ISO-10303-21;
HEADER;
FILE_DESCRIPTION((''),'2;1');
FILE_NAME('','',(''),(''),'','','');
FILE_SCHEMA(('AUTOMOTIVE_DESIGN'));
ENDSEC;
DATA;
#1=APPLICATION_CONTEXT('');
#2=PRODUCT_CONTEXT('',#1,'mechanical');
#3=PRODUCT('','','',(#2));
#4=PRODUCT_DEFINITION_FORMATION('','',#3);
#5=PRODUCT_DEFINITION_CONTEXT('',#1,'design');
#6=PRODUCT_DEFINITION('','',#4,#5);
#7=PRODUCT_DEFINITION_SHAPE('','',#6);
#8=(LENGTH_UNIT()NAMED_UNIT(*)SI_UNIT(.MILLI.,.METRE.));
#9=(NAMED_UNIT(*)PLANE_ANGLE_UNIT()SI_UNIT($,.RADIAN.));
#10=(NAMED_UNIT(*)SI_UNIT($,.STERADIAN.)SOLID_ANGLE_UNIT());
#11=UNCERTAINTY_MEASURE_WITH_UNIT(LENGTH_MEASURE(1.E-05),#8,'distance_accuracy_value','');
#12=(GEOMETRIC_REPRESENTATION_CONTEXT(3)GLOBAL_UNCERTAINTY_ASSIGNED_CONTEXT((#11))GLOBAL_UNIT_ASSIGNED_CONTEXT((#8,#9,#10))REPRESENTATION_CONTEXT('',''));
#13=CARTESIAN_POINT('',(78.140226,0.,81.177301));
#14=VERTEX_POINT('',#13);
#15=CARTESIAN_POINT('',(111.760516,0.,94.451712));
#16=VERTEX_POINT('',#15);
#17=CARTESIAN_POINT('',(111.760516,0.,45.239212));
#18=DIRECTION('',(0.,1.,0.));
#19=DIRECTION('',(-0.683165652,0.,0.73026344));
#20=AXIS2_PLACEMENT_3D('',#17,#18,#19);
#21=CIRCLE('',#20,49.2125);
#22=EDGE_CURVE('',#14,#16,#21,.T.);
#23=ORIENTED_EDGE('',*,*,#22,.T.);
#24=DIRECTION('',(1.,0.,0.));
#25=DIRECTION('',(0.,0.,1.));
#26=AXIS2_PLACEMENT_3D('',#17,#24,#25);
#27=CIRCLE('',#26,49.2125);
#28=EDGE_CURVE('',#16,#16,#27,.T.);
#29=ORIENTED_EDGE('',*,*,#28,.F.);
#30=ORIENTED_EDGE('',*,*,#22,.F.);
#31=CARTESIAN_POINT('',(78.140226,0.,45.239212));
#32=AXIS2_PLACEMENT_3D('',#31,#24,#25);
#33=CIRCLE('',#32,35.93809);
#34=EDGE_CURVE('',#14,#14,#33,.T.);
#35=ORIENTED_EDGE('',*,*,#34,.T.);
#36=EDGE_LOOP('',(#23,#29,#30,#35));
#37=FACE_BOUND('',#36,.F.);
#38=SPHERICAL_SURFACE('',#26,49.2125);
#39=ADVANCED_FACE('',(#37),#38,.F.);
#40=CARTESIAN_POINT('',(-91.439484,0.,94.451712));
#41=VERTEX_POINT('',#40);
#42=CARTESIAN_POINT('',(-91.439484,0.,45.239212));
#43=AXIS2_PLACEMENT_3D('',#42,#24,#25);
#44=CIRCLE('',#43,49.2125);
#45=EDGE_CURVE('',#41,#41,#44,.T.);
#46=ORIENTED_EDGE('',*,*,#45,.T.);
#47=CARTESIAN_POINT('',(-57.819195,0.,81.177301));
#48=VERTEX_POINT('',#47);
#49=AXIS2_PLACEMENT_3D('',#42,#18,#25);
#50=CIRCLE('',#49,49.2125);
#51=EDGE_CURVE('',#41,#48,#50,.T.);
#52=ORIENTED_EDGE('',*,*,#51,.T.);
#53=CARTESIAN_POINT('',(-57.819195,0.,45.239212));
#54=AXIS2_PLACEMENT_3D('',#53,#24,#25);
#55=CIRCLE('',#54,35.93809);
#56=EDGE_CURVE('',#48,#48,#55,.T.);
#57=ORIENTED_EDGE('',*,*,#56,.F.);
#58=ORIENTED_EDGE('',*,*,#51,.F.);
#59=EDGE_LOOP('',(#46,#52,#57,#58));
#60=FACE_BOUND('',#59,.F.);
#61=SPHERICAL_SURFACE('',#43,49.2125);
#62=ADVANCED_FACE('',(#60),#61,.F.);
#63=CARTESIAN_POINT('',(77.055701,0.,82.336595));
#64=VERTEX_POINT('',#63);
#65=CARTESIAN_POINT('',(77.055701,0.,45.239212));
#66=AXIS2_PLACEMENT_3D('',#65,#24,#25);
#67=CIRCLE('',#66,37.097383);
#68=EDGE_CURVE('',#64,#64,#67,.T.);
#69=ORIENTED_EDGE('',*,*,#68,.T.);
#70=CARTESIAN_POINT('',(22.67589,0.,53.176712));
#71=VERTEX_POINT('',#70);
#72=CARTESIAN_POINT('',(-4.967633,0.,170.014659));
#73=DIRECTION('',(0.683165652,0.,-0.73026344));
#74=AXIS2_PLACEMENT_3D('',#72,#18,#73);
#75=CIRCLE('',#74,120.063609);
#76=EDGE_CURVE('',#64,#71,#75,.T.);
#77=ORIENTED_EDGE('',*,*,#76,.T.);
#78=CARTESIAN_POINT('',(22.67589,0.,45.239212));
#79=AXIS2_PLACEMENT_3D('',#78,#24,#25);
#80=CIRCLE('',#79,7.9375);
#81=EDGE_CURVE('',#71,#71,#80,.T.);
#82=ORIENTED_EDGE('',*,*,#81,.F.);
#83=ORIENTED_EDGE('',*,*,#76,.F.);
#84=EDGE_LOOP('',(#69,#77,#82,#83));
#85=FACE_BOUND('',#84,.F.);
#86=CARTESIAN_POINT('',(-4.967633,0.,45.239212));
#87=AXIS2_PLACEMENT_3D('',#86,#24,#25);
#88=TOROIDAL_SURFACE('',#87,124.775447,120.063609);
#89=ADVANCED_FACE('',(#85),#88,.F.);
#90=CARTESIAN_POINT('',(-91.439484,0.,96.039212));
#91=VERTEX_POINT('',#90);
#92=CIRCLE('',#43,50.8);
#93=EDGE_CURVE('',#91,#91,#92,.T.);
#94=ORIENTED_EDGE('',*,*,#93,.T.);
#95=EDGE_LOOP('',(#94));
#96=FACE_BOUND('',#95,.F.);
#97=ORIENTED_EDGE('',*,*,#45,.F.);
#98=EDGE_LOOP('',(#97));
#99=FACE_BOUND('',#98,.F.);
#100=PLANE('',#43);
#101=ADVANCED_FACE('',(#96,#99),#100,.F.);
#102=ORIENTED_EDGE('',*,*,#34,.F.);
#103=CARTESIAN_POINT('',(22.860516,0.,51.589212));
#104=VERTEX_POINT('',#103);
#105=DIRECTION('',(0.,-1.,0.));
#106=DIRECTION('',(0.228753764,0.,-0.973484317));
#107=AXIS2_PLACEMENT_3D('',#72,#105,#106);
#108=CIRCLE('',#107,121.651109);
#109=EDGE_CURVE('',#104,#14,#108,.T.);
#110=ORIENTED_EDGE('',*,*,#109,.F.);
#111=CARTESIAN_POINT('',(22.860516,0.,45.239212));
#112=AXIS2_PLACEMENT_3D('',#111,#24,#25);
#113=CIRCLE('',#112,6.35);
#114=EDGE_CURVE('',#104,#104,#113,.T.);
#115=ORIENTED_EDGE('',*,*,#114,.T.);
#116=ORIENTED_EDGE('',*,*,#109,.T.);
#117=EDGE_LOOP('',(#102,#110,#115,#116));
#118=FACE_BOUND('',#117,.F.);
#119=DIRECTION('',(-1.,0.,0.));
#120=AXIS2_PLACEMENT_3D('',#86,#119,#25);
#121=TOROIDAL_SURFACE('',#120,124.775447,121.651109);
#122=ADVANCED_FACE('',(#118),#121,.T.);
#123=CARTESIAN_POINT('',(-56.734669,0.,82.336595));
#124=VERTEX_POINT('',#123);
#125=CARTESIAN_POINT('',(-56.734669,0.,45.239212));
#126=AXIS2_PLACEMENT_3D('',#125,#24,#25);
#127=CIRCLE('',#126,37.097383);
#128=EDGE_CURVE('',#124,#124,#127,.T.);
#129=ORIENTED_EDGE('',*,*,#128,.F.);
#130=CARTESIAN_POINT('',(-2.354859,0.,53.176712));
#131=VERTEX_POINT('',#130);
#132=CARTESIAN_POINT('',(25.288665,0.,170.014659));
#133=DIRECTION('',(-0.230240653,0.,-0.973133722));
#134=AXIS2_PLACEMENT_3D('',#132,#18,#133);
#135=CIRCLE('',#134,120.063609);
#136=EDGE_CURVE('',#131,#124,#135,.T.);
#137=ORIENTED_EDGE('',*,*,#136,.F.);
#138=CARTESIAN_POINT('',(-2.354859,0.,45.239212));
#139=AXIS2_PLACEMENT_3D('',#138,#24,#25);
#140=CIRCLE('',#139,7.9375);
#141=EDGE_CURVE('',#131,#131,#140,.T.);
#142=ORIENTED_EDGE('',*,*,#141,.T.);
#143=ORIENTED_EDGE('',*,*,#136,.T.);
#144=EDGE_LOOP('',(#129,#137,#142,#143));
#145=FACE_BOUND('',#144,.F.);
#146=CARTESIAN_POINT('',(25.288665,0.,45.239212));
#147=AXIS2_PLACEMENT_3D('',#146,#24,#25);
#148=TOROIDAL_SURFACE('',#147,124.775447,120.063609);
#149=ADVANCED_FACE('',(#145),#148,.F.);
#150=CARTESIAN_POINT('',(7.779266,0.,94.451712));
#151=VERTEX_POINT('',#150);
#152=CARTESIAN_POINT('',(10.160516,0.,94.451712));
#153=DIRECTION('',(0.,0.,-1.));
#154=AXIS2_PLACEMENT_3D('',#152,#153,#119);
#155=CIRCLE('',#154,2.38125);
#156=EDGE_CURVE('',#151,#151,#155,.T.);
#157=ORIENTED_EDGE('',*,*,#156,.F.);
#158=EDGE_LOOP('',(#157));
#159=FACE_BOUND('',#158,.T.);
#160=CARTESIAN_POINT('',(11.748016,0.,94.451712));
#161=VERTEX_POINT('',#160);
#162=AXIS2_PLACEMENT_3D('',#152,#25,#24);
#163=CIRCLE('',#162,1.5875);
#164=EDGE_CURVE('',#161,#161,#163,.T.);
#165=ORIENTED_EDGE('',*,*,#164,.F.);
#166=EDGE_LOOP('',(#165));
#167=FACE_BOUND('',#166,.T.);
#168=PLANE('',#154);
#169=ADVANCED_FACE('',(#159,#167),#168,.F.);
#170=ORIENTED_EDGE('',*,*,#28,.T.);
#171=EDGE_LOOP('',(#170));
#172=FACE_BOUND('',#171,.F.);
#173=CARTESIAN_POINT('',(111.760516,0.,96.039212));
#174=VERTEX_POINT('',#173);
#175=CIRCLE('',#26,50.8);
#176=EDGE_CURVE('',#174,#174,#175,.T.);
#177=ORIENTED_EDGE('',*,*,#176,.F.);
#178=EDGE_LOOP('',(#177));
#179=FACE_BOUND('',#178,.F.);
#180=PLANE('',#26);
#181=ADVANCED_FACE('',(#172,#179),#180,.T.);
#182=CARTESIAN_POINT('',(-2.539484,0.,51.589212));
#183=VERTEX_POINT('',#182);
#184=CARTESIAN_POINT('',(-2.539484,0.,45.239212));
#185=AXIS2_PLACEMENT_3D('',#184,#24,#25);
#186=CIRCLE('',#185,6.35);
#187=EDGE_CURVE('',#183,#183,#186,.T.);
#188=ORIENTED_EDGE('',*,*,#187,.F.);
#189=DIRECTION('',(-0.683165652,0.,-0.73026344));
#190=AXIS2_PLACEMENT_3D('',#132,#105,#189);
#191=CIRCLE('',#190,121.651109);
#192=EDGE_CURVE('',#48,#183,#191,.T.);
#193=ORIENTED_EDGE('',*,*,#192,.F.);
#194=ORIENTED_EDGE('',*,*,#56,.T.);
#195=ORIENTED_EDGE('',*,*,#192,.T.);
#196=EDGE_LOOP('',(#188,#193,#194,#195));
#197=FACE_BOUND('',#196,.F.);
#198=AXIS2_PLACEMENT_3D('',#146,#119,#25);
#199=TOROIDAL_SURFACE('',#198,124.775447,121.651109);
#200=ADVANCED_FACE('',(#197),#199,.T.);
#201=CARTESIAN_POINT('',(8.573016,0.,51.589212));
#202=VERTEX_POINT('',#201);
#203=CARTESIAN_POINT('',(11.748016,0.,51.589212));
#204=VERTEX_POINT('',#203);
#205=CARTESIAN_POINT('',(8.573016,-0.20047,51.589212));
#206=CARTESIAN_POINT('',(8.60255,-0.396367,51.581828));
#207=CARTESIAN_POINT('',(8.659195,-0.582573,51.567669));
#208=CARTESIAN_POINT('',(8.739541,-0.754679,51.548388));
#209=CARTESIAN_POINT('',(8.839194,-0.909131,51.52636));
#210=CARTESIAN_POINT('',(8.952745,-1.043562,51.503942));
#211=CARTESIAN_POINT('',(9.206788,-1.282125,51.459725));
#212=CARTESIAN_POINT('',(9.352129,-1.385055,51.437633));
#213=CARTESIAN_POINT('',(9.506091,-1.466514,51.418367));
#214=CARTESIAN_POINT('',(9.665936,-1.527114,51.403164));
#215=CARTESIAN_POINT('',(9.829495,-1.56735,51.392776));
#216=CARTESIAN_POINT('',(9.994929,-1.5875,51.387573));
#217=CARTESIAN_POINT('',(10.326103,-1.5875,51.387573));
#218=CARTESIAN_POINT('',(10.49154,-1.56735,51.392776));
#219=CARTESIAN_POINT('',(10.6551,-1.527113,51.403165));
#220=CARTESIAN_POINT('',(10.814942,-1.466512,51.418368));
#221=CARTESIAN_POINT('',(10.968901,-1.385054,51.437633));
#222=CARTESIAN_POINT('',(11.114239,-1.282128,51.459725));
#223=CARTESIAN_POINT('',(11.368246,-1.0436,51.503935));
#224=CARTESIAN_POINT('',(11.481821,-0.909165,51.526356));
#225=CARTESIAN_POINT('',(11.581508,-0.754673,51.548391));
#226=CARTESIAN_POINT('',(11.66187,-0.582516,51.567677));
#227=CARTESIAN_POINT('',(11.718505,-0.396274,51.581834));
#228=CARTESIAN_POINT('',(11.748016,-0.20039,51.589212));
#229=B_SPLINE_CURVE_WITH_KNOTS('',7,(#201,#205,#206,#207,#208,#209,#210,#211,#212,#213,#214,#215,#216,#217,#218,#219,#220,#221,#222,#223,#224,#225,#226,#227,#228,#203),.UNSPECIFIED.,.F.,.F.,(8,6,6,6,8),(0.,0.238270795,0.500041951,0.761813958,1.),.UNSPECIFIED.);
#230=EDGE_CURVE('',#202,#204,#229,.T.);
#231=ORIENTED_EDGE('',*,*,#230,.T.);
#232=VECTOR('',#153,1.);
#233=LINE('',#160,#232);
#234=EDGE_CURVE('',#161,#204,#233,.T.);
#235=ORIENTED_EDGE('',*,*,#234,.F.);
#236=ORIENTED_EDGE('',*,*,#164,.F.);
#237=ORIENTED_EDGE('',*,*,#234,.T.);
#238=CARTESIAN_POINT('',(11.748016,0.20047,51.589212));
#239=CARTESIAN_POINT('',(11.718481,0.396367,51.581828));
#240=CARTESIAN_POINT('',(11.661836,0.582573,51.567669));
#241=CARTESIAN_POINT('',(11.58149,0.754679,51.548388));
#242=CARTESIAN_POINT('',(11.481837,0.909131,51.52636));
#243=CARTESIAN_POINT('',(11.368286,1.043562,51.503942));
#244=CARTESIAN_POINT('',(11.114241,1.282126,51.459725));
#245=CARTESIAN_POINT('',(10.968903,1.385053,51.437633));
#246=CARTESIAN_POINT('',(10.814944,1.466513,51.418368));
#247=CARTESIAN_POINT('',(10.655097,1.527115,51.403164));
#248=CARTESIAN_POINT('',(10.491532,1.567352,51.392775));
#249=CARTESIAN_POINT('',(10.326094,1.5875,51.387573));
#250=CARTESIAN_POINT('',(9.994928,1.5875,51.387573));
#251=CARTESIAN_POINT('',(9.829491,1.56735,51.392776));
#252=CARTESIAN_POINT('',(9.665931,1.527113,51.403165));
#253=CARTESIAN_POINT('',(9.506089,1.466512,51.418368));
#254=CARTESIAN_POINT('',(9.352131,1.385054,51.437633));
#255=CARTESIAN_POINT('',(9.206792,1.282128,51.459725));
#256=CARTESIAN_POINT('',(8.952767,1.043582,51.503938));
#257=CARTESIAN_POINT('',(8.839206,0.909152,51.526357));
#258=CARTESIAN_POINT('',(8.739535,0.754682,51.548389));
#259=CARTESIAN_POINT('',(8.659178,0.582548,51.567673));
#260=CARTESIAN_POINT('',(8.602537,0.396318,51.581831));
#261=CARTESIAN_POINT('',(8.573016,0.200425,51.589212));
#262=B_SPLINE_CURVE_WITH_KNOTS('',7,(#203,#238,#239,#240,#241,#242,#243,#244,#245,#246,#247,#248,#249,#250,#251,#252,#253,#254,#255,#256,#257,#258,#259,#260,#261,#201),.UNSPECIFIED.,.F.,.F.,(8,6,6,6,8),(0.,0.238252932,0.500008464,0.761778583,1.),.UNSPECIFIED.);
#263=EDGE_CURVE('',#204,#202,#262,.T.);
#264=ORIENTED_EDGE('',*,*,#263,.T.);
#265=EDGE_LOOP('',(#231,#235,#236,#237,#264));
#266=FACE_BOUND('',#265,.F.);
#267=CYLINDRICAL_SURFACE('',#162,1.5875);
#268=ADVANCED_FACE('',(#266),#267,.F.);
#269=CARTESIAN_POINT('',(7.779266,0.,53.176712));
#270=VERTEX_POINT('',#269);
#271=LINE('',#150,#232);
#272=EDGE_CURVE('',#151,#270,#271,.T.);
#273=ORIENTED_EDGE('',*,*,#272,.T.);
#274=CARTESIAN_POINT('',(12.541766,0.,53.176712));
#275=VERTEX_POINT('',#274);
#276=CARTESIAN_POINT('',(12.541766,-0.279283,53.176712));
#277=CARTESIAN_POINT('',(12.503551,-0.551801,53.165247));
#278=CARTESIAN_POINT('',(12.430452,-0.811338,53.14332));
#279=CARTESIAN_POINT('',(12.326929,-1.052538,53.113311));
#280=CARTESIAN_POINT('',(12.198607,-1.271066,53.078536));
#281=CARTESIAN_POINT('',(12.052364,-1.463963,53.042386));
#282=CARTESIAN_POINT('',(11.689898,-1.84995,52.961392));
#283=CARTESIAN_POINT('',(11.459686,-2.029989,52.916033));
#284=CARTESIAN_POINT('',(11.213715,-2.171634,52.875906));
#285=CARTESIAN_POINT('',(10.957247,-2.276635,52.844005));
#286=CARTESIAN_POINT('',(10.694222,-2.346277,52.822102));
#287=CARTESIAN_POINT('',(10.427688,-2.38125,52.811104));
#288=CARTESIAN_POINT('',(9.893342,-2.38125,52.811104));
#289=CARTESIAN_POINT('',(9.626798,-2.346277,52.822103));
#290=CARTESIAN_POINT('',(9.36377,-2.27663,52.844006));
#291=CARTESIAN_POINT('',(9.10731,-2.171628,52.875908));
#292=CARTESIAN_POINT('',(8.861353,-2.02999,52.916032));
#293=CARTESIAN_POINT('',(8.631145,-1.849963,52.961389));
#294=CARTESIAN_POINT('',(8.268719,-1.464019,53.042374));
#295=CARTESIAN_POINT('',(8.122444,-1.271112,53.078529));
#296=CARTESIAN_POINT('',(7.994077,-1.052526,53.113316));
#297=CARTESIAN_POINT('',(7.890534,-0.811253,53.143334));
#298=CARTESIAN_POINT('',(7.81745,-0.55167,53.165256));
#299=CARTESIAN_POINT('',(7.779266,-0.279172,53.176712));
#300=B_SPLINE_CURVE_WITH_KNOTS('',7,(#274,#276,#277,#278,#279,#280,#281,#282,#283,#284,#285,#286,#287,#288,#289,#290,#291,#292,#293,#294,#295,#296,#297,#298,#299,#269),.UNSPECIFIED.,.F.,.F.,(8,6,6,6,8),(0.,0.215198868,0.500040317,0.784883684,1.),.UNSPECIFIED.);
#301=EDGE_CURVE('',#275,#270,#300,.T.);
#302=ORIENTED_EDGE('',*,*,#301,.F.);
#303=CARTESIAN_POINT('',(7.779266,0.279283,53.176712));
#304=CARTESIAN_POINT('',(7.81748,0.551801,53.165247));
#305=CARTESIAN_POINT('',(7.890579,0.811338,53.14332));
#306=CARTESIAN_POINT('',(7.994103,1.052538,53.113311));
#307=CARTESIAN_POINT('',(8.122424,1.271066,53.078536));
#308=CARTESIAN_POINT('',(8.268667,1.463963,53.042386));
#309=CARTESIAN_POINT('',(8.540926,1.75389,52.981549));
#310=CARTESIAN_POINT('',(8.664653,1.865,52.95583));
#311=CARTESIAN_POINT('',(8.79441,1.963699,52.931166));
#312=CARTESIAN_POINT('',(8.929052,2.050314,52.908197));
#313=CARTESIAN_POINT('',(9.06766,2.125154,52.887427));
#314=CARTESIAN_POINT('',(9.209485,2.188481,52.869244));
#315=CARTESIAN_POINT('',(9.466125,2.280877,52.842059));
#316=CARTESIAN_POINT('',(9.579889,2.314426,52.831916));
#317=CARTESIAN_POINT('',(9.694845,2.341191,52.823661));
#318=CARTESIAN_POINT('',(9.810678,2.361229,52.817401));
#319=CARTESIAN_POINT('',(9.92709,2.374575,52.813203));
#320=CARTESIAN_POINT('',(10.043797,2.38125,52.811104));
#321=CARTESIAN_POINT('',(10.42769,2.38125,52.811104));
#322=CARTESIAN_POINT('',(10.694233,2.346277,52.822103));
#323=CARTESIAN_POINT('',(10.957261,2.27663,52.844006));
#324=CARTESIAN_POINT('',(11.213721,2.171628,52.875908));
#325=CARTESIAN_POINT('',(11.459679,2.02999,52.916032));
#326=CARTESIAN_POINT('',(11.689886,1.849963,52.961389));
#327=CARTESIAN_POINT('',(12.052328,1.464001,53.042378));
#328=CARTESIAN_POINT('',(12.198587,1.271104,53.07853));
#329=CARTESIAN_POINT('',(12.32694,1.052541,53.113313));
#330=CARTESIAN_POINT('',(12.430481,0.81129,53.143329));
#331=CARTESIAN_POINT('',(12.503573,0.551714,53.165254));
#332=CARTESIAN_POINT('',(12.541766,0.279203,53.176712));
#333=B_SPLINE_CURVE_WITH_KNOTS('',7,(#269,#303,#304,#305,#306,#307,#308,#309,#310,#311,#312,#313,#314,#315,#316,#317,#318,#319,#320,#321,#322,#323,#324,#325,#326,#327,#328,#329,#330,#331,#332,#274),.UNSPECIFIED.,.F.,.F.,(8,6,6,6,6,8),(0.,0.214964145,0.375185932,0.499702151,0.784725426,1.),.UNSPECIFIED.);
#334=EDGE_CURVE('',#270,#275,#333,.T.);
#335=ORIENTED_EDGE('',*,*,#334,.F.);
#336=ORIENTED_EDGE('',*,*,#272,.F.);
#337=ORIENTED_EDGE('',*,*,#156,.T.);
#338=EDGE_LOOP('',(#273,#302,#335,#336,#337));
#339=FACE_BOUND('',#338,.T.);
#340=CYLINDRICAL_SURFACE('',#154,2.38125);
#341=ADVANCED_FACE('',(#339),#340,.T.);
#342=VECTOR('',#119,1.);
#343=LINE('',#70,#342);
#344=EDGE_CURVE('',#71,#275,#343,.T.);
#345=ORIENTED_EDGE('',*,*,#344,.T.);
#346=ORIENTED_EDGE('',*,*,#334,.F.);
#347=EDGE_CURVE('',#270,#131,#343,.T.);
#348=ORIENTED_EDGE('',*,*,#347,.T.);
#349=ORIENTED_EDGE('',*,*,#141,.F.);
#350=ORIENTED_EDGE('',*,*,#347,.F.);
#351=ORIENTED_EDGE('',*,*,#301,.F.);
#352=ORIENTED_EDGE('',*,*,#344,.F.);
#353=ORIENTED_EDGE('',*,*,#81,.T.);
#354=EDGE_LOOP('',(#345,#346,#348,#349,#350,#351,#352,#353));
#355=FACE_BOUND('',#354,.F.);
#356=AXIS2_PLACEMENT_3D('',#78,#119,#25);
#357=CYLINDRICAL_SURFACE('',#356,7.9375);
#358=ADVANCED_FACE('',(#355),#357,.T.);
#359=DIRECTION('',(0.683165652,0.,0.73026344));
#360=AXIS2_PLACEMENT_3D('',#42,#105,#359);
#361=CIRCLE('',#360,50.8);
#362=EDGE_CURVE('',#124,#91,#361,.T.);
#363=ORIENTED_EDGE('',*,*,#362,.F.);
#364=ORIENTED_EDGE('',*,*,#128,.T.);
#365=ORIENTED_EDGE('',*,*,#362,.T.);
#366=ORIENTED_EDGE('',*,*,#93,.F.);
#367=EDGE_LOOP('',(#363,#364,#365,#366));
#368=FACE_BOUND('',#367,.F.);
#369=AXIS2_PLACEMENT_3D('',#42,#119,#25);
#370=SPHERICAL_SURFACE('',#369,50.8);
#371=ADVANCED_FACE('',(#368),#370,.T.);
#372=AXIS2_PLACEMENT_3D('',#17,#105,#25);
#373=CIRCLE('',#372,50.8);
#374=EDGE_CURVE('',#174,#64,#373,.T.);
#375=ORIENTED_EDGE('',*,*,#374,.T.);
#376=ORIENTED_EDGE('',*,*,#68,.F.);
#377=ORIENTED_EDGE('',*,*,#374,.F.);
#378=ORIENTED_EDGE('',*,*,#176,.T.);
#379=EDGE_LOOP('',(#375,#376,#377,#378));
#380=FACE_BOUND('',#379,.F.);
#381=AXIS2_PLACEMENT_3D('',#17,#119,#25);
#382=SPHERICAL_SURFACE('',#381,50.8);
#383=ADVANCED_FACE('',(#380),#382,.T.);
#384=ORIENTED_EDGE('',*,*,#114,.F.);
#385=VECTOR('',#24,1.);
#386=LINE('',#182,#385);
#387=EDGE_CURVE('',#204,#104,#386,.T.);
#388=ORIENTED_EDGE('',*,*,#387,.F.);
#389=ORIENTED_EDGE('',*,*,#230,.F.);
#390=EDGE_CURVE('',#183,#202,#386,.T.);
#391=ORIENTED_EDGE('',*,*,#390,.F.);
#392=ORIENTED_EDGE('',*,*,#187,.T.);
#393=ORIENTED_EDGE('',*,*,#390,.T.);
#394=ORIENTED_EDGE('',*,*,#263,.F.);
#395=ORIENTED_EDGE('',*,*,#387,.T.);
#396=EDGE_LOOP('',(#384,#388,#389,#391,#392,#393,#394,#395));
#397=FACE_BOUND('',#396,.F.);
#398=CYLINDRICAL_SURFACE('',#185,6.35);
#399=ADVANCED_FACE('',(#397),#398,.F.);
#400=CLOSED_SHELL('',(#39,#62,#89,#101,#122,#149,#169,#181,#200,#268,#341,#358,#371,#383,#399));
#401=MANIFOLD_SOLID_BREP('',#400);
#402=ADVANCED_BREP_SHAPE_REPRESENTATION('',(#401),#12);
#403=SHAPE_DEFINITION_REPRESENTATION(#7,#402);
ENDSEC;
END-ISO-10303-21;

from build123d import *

# Parameters (mm, degrees)
F7_R     = 1.5875
F8_DEPTH = 44.45


# Not quite as in the source:
# - a length typed as a fraction of an inch, garbled in the dataset ("3 / 203.2 mm" for 3/8 in), is restored
# - a feature names something its author has since deleted; it is built from what else it names


with BuildPart() as f5:
    # F4 (on Front) → F5 (revolve)
    with BuildSketch(Plane.XZ):
        with BuildLine():
            ThreePointArc((-57.8191946572, 81.1773013498), (-32.1183318105, 62.7606186977), (-2.5394843148, 51.5892118125))
            Line((-2.5394843148, 51.5892118125), (7.7792656852, 51.5892118125))
            Line((7.7792656852, 51.5892118125), (7.7792656852, 53.1767118125))
            Line((7.7792656852, 53.1767118125), (-2.3548589537, 53.1767118125))
            ThreePointArc((-2.3548589537, 53.1767118125), (-31.4500310941, 64.2035504476), (-56.7346691844, 82.3365945607))
            ThreePointArc((-56.7346691844, 82.3365945607), (-72.7834805037, 92.4895400844), (-91.4394843148, 96.0392118125))
            Line((-91.4394843148, 96.0392118125), (-91.4394843148, 94.4517118125))
            ThreePointArc((-91.4394843148, 94.4517118125), (-73.3664806228, 91.0129673259), (-57.8191946572, 81.1773013498))
        make_face()
        with BuildLine():
            Line((10.1605156852, 53.1767118125), (10.1605156852, 51.5892118125))
            Line((10.1605156852, 51.5892118125), (22.8605156852, 51.5892118125))
            ThreePointArc((22.8605156852, 51.5892118125), (52.439363181, 62.7606186977), (78.1402260277, 81.1773013498))
            ThreePointArc((78.1402260277, 81.1773013498), (93.6875119933, 91.0129673259), (111.7605156852, 94.4517118125))
            Line((111.7605156852, 94.4517118125), (111.7605156852, 96.0392118125))
            ThreePointArc((111.7605156852, 96.0392118125), (93.1045118742, 92.4895400844), (77.0557005549, 82.3365945607))
            ThreePointArc((77.0557005549, 82.3365945607), (51.7710624646, 64.2035504476), (22.6758903242, 53.1767118125))
            Line((22.6758903242, 53.1767118125), (10.3451410463, 53.1767118125))
            Line((10.3451410463, 53.1767118125), (10.1605156852, 53.1767118125))
        make_face()
        Polygon((7.7792656852, 53.1767118125), (7.7792656852, 51.5892118125), (10.1605156852, 51.5892118125), (10.1605156852, 53.1767118125), (9.9758903242, 53.1767118125), align=None)
    revolve(axis=Axis((-40.6394843148, 0, 45.2392118125), (1, 0, 0)))

    # F4 (on Front) → F6 (revolve)
    with BuildSketch(Plane.XZ):
        Polygon((7.7792656852, 94.4517118125), (7.7792656852, 53.1767118125), (9.9758903242, 53.1767118125), (10.1605156852, 53.1767118125), (10.1605156852, 94.4517118125), align=None)
        Polygon((7.7792656852, 53.1767118125), (7.7792656852, 51.5892118125), (10.1605156852, 51.5892118125), (10.1605156852, 53.1767118125), (9.9758903242, 53.1767118125), align=None)
    revolve(axis=Axis((10.1605156852, 0, 73.0204618125), (0, 0, -1)))

    # F7 (on face) → F8 (cut)
    with BuildSketch(Plane.XY.offset(94.4517118125)):
        with Locations((10.1605156852, 0)):
            Circle(F7_R)
    extrude(amount=-F8_DEPTH, mode=Mode.SUBTRACT)


solid = f5.part
